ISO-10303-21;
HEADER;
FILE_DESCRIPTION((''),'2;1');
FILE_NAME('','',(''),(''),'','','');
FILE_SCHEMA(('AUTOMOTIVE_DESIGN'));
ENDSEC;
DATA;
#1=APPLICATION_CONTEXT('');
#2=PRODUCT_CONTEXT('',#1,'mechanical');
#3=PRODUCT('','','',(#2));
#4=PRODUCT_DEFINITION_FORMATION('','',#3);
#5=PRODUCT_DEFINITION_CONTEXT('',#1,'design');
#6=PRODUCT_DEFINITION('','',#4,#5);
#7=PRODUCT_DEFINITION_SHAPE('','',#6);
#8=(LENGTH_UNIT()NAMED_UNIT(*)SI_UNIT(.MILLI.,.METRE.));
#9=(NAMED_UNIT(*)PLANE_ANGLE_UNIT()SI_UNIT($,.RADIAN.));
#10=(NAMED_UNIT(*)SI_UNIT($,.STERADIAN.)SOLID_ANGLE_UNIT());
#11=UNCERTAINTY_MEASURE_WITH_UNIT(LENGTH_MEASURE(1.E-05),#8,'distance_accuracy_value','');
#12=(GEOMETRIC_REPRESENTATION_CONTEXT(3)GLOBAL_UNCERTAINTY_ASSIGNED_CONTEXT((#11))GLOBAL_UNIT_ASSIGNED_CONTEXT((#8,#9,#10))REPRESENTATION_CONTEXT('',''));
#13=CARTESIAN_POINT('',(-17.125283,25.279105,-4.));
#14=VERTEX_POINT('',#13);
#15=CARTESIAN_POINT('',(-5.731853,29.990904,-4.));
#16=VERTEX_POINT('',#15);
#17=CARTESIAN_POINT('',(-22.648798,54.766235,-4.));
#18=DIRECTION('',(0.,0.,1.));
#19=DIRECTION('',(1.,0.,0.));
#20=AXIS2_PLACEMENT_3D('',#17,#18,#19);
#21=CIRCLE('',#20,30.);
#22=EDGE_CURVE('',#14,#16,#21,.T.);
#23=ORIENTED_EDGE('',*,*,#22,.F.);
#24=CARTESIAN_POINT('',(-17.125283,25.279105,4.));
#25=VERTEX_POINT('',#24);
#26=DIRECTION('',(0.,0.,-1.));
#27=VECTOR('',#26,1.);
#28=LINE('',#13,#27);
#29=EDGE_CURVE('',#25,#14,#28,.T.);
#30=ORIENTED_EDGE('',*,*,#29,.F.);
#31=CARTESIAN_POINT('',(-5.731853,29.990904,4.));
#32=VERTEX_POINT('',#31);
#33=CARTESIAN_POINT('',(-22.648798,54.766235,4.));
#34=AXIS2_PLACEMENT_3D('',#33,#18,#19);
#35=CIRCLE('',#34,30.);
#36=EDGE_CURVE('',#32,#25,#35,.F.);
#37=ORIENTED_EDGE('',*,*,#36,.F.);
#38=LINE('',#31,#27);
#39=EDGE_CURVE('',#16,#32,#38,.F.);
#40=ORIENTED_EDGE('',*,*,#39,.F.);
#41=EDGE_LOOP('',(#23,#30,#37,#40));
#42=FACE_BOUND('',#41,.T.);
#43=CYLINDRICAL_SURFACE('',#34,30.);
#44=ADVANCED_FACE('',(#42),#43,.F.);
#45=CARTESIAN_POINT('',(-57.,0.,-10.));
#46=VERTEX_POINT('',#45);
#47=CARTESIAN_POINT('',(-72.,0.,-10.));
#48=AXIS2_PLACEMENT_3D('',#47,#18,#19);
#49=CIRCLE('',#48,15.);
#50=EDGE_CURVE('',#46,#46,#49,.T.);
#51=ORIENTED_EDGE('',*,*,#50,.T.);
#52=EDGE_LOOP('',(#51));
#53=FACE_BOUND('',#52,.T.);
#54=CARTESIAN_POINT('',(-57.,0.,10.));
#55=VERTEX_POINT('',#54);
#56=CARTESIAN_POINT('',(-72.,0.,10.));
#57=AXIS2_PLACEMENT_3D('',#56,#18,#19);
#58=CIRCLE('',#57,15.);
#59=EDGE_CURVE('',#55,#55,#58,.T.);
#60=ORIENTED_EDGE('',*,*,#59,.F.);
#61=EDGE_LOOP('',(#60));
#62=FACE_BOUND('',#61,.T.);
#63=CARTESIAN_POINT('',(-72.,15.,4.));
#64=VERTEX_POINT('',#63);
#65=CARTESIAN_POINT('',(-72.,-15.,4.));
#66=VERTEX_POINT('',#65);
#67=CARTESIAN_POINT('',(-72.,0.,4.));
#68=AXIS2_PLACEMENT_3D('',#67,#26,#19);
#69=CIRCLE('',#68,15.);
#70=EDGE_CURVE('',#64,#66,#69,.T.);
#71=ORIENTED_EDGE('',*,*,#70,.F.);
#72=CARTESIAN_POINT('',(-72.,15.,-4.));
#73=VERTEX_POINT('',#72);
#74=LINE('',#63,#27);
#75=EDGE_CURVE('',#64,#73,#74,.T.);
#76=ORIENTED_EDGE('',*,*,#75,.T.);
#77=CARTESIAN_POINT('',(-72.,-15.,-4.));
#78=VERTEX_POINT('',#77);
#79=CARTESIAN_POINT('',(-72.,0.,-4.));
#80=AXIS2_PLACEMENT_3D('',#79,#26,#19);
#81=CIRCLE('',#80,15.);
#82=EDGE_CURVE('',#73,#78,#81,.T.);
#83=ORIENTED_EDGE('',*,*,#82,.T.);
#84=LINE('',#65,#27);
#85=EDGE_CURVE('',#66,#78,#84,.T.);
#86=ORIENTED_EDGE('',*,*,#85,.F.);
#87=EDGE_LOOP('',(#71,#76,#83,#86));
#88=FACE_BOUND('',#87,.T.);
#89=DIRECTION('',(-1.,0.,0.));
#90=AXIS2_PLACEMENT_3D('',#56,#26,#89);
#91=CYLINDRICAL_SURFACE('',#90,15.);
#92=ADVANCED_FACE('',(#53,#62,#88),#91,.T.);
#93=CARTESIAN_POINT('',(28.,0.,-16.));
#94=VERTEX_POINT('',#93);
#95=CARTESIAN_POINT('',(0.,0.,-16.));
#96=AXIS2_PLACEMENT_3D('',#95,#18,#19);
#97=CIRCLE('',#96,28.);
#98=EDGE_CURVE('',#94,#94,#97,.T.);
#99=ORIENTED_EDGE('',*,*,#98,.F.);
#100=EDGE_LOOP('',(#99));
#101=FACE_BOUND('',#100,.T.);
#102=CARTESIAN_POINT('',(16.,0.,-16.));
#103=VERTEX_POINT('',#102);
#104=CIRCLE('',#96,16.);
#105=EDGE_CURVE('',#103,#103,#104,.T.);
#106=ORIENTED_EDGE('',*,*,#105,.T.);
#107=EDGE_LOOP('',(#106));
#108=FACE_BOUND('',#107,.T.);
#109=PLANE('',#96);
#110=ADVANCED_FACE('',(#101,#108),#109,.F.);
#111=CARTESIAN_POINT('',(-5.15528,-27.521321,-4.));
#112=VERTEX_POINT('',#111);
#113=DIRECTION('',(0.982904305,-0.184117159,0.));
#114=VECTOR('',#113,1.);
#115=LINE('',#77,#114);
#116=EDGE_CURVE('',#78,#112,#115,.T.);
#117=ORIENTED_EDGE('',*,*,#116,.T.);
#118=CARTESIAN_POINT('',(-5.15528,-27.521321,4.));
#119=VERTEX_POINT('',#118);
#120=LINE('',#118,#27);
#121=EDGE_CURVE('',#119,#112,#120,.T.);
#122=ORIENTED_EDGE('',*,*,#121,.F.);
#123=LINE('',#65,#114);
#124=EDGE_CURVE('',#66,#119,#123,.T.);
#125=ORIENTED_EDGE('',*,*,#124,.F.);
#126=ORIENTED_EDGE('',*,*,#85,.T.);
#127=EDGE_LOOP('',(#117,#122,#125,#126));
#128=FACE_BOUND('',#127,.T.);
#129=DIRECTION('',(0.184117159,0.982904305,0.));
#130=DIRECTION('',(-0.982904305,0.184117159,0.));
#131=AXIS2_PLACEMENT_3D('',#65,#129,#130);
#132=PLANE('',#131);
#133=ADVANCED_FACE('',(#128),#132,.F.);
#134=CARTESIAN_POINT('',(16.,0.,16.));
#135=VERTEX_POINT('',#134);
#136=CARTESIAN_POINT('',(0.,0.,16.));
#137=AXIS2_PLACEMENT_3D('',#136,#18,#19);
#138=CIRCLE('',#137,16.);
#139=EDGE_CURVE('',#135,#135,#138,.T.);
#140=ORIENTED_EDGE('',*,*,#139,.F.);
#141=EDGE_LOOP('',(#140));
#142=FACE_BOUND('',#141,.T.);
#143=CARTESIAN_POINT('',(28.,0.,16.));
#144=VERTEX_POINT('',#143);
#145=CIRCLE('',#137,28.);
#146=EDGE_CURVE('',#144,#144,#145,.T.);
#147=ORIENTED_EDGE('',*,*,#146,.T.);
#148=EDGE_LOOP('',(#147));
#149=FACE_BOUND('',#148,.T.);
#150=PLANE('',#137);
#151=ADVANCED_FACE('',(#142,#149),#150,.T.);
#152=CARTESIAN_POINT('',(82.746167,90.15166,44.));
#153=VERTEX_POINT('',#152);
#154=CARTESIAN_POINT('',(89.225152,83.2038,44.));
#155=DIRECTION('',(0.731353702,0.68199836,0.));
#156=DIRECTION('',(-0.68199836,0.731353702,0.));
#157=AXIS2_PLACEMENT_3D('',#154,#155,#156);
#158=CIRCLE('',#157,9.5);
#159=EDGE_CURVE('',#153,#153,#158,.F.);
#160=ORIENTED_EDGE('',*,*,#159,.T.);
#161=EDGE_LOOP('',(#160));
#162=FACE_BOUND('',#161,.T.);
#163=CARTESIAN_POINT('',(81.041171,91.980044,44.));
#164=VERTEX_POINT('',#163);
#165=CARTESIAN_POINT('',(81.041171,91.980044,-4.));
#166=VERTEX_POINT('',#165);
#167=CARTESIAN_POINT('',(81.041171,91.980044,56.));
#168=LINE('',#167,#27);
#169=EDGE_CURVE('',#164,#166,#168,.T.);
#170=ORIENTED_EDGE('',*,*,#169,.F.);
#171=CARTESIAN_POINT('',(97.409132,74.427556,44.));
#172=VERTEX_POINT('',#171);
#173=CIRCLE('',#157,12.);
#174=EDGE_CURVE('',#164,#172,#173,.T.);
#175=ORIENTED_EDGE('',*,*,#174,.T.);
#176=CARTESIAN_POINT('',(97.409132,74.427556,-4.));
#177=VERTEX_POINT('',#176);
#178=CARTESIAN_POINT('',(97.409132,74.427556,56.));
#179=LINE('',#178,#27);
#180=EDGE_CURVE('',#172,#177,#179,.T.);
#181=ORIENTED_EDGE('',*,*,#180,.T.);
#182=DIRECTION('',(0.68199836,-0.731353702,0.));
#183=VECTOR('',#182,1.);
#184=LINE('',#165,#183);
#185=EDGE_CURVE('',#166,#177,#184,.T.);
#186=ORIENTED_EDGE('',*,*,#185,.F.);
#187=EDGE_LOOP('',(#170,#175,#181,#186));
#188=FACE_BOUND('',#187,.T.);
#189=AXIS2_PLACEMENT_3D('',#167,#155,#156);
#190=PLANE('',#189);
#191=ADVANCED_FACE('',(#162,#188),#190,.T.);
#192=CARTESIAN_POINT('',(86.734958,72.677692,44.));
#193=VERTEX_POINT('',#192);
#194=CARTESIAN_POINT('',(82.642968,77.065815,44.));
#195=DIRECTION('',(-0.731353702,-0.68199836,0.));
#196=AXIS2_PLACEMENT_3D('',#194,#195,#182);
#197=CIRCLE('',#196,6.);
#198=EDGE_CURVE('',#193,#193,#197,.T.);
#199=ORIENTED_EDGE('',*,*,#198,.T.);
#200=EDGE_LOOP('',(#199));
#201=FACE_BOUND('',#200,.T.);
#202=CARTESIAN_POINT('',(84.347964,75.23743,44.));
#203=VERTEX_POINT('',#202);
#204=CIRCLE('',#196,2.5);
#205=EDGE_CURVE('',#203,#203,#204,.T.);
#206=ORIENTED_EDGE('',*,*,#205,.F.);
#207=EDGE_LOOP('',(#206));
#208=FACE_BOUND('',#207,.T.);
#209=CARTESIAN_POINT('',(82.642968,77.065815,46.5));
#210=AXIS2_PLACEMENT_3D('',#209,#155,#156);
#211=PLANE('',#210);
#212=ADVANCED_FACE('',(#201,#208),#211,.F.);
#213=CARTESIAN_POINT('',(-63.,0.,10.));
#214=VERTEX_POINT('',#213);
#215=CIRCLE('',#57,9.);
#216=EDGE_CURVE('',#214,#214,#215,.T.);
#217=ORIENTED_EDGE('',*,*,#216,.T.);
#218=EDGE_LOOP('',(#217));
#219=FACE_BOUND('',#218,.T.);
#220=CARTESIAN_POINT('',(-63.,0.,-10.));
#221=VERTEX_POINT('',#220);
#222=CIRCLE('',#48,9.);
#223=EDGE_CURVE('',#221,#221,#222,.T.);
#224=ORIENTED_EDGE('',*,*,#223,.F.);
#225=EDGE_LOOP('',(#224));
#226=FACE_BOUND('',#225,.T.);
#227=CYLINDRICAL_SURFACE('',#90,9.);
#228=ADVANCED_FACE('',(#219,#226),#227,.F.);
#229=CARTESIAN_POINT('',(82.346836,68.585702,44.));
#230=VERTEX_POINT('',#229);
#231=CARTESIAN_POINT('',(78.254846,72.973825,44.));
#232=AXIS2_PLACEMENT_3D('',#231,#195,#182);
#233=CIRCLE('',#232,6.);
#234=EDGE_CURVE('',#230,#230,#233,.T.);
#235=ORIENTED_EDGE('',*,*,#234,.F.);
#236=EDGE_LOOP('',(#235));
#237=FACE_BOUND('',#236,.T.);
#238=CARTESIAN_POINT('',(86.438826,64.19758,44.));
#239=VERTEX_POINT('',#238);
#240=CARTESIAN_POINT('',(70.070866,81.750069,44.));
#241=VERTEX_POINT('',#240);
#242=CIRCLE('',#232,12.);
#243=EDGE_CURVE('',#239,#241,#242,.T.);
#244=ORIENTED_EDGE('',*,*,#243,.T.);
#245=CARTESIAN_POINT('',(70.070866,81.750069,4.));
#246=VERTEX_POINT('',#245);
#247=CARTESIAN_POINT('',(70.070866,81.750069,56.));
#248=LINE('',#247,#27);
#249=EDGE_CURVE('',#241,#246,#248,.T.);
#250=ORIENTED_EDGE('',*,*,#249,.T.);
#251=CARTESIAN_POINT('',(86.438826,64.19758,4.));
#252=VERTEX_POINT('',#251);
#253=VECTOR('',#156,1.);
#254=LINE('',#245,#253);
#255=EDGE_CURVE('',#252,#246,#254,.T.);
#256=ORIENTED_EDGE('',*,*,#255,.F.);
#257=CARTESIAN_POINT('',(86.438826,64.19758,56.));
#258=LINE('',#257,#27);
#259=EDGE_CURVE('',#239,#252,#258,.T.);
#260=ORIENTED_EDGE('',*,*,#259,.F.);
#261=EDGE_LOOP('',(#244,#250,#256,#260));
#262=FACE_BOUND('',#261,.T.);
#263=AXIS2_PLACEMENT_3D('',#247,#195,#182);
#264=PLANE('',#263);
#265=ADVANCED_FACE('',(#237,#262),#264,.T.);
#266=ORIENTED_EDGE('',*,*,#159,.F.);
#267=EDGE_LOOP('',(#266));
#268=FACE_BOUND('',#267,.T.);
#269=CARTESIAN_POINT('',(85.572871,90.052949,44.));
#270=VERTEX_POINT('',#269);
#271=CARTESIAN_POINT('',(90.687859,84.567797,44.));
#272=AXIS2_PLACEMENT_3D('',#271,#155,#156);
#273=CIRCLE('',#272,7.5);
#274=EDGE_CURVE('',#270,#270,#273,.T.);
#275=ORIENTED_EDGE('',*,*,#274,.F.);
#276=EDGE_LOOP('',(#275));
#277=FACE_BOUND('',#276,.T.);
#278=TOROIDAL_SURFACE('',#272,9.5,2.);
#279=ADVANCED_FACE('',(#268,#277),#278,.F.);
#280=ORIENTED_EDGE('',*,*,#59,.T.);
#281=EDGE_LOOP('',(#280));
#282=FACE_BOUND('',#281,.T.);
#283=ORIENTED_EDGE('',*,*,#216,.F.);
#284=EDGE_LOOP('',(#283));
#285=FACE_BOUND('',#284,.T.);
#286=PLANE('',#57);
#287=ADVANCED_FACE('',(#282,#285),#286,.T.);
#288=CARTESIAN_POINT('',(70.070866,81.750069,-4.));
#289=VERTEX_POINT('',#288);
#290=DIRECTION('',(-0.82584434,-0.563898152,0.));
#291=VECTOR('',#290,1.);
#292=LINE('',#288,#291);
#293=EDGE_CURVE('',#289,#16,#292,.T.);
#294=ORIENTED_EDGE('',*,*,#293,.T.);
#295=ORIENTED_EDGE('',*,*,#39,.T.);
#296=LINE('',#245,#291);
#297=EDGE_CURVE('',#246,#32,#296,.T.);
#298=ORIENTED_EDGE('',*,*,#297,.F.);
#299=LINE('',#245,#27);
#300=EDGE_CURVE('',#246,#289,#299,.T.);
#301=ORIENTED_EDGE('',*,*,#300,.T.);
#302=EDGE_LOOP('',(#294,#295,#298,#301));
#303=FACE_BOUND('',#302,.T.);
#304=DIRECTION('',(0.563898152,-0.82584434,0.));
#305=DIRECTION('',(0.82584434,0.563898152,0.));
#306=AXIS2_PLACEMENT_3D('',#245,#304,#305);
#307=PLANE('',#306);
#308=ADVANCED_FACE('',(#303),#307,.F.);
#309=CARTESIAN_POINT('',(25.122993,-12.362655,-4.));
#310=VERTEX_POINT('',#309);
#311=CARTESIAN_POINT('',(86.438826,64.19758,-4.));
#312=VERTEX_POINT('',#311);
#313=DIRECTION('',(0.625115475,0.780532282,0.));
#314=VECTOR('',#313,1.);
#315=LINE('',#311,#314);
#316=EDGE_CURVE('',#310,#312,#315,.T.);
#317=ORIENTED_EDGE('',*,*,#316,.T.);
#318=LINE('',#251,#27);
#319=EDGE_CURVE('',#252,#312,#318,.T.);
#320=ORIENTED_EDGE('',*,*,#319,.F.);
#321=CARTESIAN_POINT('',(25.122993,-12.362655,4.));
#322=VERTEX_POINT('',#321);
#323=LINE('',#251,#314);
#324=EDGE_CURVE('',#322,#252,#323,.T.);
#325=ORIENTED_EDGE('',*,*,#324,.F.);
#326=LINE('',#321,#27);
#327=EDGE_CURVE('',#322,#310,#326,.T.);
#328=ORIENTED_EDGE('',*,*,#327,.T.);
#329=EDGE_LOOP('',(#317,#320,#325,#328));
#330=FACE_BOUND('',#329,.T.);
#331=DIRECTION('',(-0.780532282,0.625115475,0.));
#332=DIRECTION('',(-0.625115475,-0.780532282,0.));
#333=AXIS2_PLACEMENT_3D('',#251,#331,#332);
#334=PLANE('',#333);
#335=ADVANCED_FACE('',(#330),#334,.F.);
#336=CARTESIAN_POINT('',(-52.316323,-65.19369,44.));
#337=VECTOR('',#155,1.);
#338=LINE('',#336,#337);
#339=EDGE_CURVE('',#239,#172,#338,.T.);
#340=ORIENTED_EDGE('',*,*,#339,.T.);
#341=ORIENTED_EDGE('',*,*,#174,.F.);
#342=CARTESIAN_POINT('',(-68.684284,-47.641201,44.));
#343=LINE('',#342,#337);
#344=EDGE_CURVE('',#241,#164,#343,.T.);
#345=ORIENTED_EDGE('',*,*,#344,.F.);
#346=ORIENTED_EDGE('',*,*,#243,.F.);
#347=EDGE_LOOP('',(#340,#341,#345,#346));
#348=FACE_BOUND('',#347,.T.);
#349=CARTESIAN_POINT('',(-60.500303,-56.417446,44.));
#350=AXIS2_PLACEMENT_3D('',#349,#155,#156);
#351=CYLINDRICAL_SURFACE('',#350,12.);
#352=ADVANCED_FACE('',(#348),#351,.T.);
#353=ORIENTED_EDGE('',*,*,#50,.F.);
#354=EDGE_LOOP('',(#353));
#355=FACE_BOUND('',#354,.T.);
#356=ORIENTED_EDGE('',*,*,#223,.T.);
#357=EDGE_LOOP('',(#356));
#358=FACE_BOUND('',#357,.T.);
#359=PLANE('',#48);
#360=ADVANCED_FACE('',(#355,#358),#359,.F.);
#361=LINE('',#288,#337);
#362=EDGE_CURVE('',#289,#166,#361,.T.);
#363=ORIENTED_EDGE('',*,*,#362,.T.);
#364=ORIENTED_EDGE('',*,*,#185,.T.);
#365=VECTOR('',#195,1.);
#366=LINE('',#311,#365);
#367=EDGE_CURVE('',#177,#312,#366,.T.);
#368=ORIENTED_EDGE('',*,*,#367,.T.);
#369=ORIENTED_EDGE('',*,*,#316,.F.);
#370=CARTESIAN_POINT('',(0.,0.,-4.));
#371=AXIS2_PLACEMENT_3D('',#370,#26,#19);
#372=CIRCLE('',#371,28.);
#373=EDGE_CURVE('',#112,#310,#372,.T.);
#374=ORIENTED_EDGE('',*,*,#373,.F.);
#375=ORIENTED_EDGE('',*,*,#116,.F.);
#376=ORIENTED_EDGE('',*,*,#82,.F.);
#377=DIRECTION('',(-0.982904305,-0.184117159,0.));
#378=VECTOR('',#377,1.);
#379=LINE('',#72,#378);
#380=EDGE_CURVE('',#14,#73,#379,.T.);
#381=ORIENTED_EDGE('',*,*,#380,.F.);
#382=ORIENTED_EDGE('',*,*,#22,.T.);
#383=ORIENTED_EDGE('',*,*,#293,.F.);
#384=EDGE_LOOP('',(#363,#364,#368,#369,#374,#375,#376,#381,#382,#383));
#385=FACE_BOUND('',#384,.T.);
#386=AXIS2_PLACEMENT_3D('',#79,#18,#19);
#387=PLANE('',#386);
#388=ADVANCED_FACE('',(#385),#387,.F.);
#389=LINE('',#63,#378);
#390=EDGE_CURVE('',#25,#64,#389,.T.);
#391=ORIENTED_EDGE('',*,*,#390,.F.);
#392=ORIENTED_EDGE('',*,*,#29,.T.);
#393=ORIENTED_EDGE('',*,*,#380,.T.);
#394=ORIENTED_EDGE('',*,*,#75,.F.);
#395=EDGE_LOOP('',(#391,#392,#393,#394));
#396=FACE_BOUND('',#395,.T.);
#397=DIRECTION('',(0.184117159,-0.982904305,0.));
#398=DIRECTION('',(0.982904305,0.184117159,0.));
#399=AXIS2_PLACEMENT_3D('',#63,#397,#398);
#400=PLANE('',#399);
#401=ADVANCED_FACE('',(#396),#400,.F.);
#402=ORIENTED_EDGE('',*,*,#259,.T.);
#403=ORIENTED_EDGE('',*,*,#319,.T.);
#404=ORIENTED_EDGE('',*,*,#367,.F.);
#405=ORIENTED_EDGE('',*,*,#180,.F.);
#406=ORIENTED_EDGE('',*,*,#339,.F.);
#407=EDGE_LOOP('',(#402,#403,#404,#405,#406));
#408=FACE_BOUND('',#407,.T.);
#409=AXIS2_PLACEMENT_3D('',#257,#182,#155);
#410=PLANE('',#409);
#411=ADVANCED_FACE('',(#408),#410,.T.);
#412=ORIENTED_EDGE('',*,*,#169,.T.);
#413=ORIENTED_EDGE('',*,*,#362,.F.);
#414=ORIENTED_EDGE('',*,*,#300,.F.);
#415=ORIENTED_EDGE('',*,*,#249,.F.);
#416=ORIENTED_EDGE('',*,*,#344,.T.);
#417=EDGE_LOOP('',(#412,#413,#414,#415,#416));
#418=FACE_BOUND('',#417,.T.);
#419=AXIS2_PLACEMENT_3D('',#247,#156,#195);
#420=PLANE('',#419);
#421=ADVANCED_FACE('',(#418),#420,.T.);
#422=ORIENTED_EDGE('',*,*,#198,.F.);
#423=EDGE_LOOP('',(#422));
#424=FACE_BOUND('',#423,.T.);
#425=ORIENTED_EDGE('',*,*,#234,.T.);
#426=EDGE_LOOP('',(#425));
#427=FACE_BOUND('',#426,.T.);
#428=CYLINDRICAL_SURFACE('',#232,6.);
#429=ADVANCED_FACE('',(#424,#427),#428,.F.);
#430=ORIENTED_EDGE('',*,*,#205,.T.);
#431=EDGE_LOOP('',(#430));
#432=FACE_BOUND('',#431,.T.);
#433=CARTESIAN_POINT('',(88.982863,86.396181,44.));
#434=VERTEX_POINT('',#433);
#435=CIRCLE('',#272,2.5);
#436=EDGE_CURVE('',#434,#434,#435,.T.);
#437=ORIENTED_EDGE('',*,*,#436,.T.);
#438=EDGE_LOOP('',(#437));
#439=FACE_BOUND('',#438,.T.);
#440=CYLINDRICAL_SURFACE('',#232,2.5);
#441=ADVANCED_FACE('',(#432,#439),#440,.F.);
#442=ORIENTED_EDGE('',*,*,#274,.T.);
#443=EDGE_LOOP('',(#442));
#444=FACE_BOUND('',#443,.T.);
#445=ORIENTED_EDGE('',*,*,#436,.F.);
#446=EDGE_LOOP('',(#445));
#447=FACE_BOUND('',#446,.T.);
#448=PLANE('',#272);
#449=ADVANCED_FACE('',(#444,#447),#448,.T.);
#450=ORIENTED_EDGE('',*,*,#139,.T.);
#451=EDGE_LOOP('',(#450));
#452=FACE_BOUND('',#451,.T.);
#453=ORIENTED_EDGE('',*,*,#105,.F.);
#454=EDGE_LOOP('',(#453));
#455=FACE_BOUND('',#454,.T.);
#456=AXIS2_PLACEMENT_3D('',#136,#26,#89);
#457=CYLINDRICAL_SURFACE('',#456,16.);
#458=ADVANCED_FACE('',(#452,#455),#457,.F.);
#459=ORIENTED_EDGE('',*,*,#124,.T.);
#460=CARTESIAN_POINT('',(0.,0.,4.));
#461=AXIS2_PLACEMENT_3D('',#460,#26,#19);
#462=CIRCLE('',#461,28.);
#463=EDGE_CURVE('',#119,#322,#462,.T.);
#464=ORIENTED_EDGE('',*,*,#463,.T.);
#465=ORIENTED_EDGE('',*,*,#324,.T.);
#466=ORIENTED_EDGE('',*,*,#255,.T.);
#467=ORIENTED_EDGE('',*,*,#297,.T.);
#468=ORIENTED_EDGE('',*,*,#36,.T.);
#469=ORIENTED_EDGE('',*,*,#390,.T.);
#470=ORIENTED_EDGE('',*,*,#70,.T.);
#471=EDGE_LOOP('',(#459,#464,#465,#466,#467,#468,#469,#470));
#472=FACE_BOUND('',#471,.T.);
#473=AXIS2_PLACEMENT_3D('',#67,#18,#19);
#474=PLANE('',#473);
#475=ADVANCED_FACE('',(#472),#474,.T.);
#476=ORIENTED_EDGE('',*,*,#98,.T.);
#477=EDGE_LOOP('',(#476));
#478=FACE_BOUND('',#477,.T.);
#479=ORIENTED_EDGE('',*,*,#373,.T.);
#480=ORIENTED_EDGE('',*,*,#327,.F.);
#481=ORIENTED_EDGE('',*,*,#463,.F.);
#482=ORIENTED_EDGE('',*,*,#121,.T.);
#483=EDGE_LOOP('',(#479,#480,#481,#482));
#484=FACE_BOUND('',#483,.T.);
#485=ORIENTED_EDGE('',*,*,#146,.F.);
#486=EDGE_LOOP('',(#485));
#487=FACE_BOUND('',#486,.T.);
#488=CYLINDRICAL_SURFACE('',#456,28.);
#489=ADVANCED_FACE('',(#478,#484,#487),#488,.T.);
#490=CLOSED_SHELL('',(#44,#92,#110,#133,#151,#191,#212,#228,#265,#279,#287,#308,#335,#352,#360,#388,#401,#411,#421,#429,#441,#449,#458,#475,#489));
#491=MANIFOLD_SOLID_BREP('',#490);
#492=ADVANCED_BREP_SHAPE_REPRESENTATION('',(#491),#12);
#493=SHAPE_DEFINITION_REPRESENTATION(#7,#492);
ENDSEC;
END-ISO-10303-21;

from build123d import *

# Parameters (mm, degrees)
SKETCH1_R           = 28
SKETCH1_R_2         = 16
BOSS_EXTRUDE1_DEPTH = 16
SKETCH2_R           = 15
SKETCH2_R_2         = 9
BOSS_EXTRUDE2_DEPTH = 10
BOSS_EXTRUDE3_DEPTH = 4
BOSS_EXTRUDE4_DEPTH = 4
BOSS_EXTRUDE5_DEPTH = 60
CUT_EXTRUDE1_DEPTH  = 216.77207691
HOLE1_D             = 5
HOLE1_CBORE_D       = 12
HOLE1_CBORE_DEPTH   = 6
BOSS_EXTRUDE6_START = 2
SKETCH9_R           = 7.5
SKETCH9_R_2         = 2.5
BOSS_EXTRUDE6_DEPTH = 2
FILLET1_R           = 30
FILLET2_R           = 2


with BuildPart() as part:
    # Sketch1 → Boss-Extrude1 (new, symmetric)
    with BuildSketch(Plane.XY):
        Circle(SKETCH1_R)
        Circle(SKETCH1_R_2, mode=Mode.SUBTRACT)
    extrude(amount=BOSS_EXTRUDE1_DEPTH, both=True)



with BuildPart() as body_2:
    # Sketch2 → Boss-Extrude2 (new, symmetric)
    with BuildSketch(Plane.XY):
        with Locations((-72, 0)):
            Circle(SKETCH2_R)
        with Locations((-72, 0)):
            Circle(SKETCH2_R_2, mode=Mode.SUBTRACT)
    extrude(amount=BOSS_EXTRUDE2_DEPTH, both=True)


with BuildPart() as part_1:
    add(part.part)

    add(body_2.part)  # Boss-Extrude3 merges body 2
    # Sketch3 → Boss-Extrude3 (add, symmetric)
    with BuildSketch(Plane.XY):
        with BuildLine():
            Line((-72, 15), (-5.155280446, 27.521320527))
            ThreePointArc((-5.155280446, 27.521320527), (-28, 0), (-5.155280446, -27.521320527))
            Line((-5.155280446, -27.521320527), (-72, -15))
            ThreePointArc((-72, -15), (-57, 0), (-72, 15))
        make_face()
    extrude(amount=BOSS_EXTRUDE3_DEPTH, both=True)

    # Sketch4 → Boss-Extrude4 (add, symmetric)
    with BuildSketch(Plane.XY):
        with BuildLine():
            Line((70.070865753, 81.750068946), (86.438826394, 64.197580107))
            Line((86.438826394, 64.197580107), (25.1229929, -12.362654559))
            ThreePointArc((25.1229929, -12.362654559), (22.301575109, 16.930438496), (-5.155280446, 27.521320527))
            Line((-5.155280446, 27.521320527), (-10.933902304, 26.438871876))
            Line((-10.933902304, 26.438871876), (70.070865753, 81.750068946))
        make_face()
    extrude(amount=BOSS_EXTRUDE4_DEPTH, both=True)

    # Sketch5 → Boss-Extrude5 (add)
    with BuildSketch(Plane(origin=(0, 0, -4), x_dir=(-1, 0, 0), z_dir=(0, 0, -1))):
        Polygon((-70.070865753, 81.750068946), (-81.041171277, 91.980044347), (-97.409131918, 74.427555508), (-86.438826394, 64.197580107), align=None)
    extrude(amount=-BOSS_EXTRUDE5_DEPTH)

    # Sketch6 → Cut-Extrude1 (cut, through all)
    with BuildSketch(Plane(origin=(89.225151598, 83.203799928, 0), x_dir=(0, 0, -1), z_dir=(0.7313537016191697, 0.6819983600624995, 0))):
        with BuildLine():
            Line((-56, 12), (-56, 0))
            ThreePointArc((-56, 0), (-52.485281374, 8.485281374), (-44, 12))
            Line((-44, 12), (-56, 12))
        make_face()
        with BuildLine():
            Line((-56, 0), (-56, -12))
            Line((-56, -12), (-44, -12))
            ThreePointArc((-44, -12), (-52.485281374, -8.485281374), (-56, 0))
        make_face()
    extrude(amount=-CUT_EXTRUDE1_DEPTH, mode=Mode.SUBTRACT)

    # Hole1 (through all)
    with Locations(Plane(origin=(78.254846073, 72.973824527, 0), x_dir=(0, 0, 1), z_dir=(-0.7313537016191697, -0.6819983600624995, 0))):
        with Locations((44, 0)):
            CounterBoreHole(HOLE1_D / 2, HOLE1_CBORE_D / 2, HOLE1_CBORE_DEPTH)

    # Sketch9 → Boss-Extrude6 (add)
    with BuildSketch(Plane(origin=(89.225151598, 83.203799928, 0), x_dir=(0, 0, -1), z_dir=(0.7313537016191697, 0.6819983600624995, 0)).offset(BOSS_EXTRUDE6_START)):
        with Locations(Location((-44, 0, 0), (0, 0, 90))):
            Circle(SKETCH9_R)
        with Locations(Location((-44, 0, 0), (0, 0, 270))):
            Circle(SKETCH9_R_2, mode=Mode.SUBTRACT)
    extrude(amount=-BOSS_EXTRUDE6_DEPTH)

    # Fillet1
    fillet1_edges = [part_1.edges().sort_by_distance(p)[0] for p in [
        (-10.933902304, 26.438871876, 0),
    ]]
    fillet(fillet1_edges, radius=FILLET1_R)

    # Fillet2
    fillet2_edges = [part_1.edges().sort_by_distance(p)[0] for p in [
        (94.340139298, 77.718647165, 44),
    ]]
    fillet(fillet2_edges, radius=FILLET2_R - 0.0001)  # a hair under: the kernel refuses the full size


solid = part_1.part
